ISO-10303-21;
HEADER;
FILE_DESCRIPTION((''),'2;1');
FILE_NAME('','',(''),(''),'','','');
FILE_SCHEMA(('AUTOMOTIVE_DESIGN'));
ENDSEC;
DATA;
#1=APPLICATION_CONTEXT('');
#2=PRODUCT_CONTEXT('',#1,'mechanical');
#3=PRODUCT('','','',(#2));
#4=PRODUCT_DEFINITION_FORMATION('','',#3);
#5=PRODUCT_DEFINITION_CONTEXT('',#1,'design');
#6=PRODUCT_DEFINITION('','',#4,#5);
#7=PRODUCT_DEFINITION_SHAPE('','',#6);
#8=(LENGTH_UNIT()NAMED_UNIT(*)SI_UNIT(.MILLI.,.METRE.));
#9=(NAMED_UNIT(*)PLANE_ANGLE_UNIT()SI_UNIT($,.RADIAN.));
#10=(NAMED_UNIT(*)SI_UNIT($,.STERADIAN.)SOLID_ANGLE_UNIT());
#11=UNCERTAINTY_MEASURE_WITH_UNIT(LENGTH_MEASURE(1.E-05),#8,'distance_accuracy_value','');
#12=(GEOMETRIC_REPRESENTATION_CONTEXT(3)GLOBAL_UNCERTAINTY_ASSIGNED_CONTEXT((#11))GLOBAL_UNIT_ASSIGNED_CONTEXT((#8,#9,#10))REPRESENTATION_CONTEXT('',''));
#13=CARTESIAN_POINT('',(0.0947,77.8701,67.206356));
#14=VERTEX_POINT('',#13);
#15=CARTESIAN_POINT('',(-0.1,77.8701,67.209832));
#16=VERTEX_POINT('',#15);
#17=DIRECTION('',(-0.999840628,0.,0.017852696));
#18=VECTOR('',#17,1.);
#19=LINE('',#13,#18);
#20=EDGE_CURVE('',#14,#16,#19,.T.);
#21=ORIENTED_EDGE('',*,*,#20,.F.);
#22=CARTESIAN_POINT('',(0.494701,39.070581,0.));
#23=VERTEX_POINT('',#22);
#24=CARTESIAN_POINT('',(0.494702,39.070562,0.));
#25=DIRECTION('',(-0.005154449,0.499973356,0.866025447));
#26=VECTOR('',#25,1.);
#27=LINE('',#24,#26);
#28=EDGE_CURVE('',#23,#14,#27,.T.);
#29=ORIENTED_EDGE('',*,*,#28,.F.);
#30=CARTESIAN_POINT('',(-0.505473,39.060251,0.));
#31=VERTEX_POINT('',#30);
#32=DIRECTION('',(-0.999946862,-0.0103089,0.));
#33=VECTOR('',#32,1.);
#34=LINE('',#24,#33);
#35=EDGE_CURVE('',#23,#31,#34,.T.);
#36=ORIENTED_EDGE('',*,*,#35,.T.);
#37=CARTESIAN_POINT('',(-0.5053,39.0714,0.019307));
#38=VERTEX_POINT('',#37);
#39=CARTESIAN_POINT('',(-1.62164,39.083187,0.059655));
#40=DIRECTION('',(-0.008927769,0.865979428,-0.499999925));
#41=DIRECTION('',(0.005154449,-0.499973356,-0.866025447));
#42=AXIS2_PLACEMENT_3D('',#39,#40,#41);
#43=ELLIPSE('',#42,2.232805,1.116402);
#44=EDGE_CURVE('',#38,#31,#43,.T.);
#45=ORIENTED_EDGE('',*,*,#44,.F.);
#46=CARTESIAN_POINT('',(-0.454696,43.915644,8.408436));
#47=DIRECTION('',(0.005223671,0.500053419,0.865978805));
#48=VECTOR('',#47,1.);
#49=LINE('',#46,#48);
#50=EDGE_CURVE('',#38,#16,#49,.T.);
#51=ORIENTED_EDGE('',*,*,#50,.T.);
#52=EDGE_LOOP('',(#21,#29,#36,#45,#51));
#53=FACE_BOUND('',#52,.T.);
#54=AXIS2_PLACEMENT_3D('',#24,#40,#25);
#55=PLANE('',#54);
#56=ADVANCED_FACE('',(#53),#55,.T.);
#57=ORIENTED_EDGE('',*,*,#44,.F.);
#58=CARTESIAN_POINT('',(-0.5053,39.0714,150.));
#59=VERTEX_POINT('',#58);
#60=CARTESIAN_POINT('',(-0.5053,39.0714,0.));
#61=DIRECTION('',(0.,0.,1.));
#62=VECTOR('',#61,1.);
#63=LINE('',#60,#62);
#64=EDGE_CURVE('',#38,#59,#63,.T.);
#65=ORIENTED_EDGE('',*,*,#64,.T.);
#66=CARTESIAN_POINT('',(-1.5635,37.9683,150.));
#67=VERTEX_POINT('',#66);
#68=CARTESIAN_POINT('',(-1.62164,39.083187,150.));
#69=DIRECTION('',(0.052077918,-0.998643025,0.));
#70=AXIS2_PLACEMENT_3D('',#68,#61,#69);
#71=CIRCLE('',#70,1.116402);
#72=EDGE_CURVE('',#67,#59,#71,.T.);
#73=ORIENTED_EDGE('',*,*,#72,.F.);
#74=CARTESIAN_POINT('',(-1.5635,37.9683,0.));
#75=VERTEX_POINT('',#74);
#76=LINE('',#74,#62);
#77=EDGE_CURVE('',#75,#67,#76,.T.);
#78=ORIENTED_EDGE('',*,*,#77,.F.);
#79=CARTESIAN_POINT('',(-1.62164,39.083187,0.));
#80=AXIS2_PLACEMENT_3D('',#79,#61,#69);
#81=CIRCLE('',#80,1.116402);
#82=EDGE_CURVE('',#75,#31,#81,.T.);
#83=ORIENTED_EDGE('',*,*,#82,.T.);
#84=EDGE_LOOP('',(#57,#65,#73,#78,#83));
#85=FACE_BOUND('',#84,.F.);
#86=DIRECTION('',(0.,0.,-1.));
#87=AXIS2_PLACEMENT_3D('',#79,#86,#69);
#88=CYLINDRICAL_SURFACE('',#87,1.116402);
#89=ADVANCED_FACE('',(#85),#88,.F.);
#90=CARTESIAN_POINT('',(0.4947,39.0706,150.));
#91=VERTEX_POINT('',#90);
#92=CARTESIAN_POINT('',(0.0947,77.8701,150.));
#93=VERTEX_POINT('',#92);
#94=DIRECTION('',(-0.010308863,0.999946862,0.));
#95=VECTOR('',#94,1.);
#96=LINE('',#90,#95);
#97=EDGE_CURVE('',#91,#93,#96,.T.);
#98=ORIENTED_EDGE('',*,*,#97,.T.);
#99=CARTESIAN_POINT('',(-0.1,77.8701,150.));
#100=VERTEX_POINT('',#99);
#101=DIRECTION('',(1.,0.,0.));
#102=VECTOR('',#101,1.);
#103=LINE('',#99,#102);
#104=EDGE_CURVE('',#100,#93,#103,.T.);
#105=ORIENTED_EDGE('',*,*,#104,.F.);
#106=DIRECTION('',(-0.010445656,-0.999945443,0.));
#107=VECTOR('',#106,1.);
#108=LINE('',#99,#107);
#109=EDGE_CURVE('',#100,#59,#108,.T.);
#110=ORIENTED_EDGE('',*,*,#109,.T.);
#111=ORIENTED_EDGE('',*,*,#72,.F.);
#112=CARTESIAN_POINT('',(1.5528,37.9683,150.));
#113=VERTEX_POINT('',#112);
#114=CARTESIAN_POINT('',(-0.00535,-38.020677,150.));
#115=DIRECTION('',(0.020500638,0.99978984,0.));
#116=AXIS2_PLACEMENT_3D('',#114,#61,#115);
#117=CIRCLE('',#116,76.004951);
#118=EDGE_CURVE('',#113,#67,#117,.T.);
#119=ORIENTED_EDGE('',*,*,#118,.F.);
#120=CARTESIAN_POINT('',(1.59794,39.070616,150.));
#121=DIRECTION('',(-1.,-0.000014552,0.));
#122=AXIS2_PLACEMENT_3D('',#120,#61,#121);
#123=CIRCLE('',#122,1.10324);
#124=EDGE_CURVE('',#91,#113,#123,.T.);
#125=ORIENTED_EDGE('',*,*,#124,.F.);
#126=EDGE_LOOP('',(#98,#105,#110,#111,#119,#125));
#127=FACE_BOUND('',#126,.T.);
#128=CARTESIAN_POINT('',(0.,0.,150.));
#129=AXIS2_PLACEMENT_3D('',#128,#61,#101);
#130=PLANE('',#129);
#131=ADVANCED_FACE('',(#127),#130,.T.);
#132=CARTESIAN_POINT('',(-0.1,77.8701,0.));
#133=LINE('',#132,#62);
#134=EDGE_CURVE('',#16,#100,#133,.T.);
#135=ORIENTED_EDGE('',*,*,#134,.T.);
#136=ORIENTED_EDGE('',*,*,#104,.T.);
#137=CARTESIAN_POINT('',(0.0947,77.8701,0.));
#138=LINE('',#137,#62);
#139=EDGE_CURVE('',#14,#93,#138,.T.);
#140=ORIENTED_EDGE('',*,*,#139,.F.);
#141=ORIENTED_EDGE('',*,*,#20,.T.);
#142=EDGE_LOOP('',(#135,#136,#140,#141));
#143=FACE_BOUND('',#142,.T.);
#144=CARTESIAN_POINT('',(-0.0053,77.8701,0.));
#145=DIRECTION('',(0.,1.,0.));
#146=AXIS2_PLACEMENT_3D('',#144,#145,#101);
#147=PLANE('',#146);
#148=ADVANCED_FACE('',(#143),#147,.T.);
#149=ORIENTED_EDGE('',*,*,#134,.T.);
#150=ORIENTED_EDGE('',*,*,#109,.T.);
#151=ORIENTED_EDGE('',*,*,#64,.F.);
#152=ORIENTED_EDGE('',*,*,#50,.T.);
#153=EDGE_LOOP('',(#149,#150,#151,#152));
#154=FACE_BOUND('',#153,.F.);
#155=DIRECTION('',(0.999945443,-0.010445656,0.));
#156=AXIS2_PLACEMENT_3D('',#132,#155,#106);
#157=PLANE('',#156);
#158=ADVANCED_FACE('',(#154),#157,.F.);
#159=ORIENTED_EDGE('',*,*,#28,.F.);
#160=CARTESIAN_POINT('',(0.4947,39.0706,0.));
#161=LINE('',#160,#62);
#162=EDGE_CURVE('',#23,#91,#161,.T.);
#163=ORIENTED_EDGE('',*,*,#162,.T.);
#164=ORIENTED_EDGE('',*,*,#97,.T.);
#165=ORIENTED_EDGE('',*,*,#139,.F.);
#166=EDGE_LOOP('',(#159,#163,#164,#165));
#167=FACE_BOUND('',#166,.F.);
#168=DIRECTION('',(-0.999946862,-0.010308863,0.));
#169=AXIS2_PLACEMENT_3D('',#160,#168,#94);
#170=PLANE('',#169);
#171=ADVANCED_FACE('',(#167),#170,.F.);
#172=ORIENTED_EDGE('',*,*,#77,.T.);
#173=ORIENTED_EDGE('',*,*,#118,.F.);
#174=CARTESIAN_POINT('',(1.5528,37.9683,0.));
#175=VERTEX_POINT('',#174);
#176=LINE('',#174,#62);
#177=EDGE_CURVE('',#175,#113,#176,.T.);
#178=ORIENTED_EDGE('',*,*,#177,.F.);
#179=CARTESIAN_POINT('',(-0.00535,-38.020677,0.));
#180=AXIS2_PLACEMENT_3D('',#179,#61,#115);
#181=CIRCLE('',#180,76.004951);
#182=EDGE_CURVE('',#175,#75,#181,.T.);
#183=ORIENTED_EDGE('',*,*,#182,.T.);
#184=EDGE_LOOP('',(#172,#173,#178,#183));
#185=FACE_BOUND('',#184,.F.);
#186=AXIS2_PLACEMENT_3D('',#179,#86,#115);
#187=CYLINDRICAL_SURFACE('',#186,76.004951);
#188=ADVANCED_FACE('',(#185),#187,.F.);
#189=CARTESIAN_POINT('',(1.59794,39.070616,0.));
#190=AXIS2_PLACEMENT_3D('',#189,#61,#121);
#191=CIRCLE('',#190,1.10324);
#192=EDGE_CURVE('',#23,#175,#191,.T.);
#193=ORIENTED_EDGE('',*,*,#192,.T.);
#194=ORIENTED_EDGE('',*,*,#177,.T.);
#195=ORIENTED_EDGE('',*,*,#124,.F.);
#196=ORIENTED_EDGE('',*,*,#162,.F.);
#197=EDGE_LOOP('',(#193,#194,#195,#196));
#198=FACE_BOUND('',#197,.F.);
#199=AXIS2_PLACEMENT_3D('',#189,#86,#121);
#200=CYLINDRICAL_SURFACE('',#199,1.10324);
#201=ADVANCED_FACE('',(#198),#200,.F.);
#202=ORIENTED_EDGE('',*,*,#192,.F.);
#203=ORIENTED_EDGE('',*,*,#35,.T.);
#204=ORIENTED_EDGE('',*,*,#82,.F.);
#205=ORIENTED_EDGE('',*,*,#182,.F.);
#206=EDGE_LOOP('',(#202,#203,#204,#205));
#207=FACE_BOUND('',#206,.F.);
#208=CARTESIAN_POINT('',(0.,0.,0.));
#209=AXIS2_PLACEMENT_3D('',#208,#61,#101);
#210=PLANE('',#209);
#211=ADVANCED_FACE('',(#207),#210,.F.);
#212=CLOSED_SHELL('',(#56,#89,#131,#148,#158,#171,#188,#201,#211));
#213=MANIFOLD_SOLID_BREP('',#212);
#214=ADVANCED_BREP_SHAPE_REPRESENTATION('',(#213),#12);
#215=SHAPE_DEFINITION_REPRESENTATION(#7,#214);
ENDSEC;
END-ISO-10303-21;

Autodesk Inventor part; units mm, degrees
ref_plane "YZ Plane" through (0, 0, 0) normal (1, 0, 0) x (0, 1, 0)
ref_plane "XZ Plane" through (0, 0, 0) normal (0, 1, 0) x (-1, 0, 0)
ref_plane "XY Plane" through (0, 0, 0) normal (0, 0, 1) x (1, 0, 0)
sketch "Sketch1" plane through (0, 0, 0) normal (0, 0, 1) x (1, 0, 0)
  line L0 (-0.0053, 77.8701) -> (0.4947, 77.8701)
  line L1 (0.4947, 77.8701) -> (-0.5053, 77.8701)
  arc A0 (0.4947, 39.0706) -> (1.5528, 37.9683) centre (1.5979, 39.0706) ccw
  arc A1 (-1.5635, 37.9683) -> (-0.5053, 39.0714) centre (-1.6216, 39.0831) ccw
  line L2 (0.4947, 77.8701) -> (0.4947, 39.0706)
  line L3 (-0.5053, 77.8701) -> (-0.5053, 39.0714)
  arc A2 (1.5528, 37.9683) -> (-1.5635, 37.9683) centre (-0.0053, -38.0158) ccw
  line L4 (-0.0053, 77.8701) -> (0.0947, 77.8701)
  line L5 (-0.0053, 76.9579) -> (-0.0053, 77.45)
  line L6 (0.4947, 77.8701) -> (0.4947, 39.0706)
  line L7 (0.4947, 39.0706) -> (0.0947, 77.8701)
  line L8 (0, 77.8701) -> (-0.1, 77.8701)
  line L9 (-0.1, 77.8701) -> (-0.5053, 39.0714)
  point P0 (0, 0)
  dimension "d2" = 0.5
  dimension "d3" = 1
  dimension "d7" = 76
  dimension "d9" = 0.1
  dimension "d11" = 0.1
extrude "Extrusion1" add sketch "Sketch1" along normal blind 150 contours L0 L7 A0 A2 A1 L9 L1
sketch "Sketch2" plane through (0.0947, 77.8701, 150) normal (0.9999469, 0.0103089, 0) x (0, 0, -1)
  line L0 (150, -38.8016) -> (43.624, 22.6146)
  line L1 (150, -38.8016) -> (272.8324, -38.8016) construction
  line L2 (150, 0) -> (150, -38.8016)
  line L3 (150, -38.8016) -> (150, 6.7888)
  line L4 (150, 6.7888) -> (63.7901, 6.7888)
  point P0 (150, -77.865)
  point P1 (71.0352, 6.7888)
  dimension "d14" = 150
extrude "Extrusion2" cut sketch "Sketch2" against normal through all
properties part number "ALETAS"
